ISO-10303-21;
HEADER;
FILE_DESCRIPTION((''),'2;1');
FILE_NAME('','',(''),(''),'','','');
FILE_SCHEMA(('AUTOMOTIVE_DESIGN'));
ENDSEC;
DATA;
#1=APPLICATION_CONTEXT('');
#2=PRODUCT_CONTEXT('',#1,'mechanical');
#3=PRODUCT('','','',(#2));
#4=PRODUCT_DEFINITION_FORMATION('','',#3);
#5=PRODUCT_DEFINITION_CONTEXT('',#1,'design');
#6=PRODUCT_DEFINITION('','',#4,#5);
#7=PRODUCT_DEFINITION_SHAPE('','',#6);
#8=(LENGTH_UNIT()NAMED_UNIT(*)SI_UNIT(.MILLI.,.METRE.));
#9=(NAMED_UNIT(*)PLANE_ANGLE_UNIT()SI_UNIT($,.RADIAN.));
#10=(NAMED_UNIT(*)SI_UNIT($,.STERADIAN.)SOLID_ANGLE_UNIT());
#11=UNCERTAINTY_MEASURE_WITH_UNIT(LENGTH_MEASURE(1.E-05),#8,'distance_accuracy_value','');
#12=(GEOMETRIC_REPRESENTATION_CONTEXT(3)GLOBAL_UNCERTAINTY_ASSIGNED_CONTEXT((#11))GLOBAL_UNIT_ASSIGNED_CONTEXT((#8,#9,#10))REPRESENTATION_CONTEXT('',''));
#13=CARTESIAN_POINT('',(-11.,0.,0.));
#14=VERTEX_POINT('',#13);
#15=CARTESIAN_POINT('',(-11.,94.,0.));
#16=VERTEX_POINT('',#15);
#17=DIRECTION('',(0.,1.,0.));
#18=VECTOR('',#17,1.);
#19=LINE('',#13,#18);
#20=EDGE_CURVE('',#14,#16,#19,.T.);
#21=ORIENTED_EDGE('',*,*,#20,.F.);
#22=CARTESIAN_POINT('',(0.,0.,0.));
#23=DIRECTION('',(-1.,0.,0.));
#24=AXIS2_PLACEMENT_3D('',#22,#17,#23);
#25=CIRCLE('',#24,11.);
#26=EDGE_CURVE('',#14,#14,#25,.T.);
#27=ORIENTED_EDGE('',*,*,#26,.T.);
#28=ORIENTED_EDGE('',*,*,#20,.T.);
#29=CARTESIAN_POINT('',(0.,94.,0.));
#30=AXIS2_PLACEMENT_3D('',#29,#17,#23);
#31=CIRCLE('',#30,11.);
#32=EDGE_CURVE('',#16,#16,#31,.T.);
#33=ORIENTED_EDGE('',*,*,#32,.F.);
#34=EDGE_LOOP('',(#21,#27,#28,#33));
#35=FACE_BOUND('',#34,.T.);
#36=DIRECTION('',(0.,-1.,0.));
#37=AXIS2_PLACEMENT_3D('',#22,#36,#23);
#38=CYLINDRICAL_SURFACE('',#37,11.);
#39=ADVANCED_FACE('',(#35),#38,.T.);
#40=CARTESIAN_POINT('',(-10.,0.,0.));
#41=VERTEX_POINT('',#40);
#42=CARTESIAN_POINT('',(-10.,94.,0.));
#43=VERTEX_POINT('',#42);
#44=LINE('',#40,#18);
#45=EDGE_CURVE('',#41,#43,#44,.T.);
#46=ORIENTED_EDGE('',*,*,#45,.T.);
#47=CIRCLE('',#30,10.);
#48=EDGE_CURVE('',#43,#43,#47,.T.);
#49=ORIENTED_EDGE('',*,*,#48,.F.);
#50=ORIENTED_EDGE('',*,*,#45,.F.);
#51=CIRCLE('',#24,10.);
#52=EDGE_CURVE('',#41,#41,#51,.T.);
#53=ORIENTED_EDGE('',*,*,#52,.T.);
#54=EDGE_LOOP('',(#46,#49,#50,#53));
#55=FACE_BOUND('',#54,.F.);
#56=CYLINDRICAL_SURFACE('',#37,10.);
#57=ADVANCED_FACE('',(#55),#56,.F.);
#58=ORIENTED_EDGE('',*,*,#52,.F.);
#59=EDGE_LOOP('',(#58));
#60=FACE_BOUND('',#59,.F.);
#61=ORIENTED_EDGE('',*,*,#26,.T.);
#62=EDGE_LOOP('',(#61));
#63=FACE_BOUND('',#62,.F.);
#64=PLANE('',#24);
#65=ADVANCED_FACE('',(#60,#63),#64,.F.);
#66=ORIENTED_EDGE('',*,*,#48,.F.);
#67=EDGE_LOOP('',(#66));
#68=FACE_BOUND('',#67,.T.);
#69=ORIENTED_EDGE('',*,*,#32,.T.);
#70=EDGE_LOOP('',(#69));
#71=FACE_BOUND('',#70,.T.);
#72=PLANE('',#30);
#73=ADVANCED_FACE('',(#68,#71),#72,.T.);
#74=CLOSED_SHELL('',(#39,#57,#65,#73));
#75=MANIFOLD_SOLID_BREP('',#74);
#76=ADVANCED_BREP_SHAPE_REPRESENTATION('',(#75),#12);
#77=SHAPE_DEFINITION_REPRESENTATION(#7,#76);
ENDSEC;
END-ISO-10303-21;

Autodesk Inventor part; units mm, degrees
ref_plane "YZ Plane" through (0, 0, 0) normal (1, 0, 0) x (0, 1, 0)
ref_plane "XZ Plane" through (0, 0, 0) normal (0, 1, 0) x (-1, 0, 0)
ref_plane "XY Plane" through (0, 0, 0) normal (0, 0, 1) x (1, 0, 0)
sketch "Sketch7" plane through (0, 0, 0) normal (0, 1, 0) x (-1, 0, 0)
  circle A0 centre (0, 0) radius 10
  circle A1 centre (0, 0) radius 11
  dimension "d40" = 20
  dimension "d41" = 22
extrude "Extrusion7" add sketch "Sketch7" along normal blind 94
thread "Thread2" size "M22x3" class "6g" standard "ANSI Metric M Profile" length 10
properties part number "Cylinder"
